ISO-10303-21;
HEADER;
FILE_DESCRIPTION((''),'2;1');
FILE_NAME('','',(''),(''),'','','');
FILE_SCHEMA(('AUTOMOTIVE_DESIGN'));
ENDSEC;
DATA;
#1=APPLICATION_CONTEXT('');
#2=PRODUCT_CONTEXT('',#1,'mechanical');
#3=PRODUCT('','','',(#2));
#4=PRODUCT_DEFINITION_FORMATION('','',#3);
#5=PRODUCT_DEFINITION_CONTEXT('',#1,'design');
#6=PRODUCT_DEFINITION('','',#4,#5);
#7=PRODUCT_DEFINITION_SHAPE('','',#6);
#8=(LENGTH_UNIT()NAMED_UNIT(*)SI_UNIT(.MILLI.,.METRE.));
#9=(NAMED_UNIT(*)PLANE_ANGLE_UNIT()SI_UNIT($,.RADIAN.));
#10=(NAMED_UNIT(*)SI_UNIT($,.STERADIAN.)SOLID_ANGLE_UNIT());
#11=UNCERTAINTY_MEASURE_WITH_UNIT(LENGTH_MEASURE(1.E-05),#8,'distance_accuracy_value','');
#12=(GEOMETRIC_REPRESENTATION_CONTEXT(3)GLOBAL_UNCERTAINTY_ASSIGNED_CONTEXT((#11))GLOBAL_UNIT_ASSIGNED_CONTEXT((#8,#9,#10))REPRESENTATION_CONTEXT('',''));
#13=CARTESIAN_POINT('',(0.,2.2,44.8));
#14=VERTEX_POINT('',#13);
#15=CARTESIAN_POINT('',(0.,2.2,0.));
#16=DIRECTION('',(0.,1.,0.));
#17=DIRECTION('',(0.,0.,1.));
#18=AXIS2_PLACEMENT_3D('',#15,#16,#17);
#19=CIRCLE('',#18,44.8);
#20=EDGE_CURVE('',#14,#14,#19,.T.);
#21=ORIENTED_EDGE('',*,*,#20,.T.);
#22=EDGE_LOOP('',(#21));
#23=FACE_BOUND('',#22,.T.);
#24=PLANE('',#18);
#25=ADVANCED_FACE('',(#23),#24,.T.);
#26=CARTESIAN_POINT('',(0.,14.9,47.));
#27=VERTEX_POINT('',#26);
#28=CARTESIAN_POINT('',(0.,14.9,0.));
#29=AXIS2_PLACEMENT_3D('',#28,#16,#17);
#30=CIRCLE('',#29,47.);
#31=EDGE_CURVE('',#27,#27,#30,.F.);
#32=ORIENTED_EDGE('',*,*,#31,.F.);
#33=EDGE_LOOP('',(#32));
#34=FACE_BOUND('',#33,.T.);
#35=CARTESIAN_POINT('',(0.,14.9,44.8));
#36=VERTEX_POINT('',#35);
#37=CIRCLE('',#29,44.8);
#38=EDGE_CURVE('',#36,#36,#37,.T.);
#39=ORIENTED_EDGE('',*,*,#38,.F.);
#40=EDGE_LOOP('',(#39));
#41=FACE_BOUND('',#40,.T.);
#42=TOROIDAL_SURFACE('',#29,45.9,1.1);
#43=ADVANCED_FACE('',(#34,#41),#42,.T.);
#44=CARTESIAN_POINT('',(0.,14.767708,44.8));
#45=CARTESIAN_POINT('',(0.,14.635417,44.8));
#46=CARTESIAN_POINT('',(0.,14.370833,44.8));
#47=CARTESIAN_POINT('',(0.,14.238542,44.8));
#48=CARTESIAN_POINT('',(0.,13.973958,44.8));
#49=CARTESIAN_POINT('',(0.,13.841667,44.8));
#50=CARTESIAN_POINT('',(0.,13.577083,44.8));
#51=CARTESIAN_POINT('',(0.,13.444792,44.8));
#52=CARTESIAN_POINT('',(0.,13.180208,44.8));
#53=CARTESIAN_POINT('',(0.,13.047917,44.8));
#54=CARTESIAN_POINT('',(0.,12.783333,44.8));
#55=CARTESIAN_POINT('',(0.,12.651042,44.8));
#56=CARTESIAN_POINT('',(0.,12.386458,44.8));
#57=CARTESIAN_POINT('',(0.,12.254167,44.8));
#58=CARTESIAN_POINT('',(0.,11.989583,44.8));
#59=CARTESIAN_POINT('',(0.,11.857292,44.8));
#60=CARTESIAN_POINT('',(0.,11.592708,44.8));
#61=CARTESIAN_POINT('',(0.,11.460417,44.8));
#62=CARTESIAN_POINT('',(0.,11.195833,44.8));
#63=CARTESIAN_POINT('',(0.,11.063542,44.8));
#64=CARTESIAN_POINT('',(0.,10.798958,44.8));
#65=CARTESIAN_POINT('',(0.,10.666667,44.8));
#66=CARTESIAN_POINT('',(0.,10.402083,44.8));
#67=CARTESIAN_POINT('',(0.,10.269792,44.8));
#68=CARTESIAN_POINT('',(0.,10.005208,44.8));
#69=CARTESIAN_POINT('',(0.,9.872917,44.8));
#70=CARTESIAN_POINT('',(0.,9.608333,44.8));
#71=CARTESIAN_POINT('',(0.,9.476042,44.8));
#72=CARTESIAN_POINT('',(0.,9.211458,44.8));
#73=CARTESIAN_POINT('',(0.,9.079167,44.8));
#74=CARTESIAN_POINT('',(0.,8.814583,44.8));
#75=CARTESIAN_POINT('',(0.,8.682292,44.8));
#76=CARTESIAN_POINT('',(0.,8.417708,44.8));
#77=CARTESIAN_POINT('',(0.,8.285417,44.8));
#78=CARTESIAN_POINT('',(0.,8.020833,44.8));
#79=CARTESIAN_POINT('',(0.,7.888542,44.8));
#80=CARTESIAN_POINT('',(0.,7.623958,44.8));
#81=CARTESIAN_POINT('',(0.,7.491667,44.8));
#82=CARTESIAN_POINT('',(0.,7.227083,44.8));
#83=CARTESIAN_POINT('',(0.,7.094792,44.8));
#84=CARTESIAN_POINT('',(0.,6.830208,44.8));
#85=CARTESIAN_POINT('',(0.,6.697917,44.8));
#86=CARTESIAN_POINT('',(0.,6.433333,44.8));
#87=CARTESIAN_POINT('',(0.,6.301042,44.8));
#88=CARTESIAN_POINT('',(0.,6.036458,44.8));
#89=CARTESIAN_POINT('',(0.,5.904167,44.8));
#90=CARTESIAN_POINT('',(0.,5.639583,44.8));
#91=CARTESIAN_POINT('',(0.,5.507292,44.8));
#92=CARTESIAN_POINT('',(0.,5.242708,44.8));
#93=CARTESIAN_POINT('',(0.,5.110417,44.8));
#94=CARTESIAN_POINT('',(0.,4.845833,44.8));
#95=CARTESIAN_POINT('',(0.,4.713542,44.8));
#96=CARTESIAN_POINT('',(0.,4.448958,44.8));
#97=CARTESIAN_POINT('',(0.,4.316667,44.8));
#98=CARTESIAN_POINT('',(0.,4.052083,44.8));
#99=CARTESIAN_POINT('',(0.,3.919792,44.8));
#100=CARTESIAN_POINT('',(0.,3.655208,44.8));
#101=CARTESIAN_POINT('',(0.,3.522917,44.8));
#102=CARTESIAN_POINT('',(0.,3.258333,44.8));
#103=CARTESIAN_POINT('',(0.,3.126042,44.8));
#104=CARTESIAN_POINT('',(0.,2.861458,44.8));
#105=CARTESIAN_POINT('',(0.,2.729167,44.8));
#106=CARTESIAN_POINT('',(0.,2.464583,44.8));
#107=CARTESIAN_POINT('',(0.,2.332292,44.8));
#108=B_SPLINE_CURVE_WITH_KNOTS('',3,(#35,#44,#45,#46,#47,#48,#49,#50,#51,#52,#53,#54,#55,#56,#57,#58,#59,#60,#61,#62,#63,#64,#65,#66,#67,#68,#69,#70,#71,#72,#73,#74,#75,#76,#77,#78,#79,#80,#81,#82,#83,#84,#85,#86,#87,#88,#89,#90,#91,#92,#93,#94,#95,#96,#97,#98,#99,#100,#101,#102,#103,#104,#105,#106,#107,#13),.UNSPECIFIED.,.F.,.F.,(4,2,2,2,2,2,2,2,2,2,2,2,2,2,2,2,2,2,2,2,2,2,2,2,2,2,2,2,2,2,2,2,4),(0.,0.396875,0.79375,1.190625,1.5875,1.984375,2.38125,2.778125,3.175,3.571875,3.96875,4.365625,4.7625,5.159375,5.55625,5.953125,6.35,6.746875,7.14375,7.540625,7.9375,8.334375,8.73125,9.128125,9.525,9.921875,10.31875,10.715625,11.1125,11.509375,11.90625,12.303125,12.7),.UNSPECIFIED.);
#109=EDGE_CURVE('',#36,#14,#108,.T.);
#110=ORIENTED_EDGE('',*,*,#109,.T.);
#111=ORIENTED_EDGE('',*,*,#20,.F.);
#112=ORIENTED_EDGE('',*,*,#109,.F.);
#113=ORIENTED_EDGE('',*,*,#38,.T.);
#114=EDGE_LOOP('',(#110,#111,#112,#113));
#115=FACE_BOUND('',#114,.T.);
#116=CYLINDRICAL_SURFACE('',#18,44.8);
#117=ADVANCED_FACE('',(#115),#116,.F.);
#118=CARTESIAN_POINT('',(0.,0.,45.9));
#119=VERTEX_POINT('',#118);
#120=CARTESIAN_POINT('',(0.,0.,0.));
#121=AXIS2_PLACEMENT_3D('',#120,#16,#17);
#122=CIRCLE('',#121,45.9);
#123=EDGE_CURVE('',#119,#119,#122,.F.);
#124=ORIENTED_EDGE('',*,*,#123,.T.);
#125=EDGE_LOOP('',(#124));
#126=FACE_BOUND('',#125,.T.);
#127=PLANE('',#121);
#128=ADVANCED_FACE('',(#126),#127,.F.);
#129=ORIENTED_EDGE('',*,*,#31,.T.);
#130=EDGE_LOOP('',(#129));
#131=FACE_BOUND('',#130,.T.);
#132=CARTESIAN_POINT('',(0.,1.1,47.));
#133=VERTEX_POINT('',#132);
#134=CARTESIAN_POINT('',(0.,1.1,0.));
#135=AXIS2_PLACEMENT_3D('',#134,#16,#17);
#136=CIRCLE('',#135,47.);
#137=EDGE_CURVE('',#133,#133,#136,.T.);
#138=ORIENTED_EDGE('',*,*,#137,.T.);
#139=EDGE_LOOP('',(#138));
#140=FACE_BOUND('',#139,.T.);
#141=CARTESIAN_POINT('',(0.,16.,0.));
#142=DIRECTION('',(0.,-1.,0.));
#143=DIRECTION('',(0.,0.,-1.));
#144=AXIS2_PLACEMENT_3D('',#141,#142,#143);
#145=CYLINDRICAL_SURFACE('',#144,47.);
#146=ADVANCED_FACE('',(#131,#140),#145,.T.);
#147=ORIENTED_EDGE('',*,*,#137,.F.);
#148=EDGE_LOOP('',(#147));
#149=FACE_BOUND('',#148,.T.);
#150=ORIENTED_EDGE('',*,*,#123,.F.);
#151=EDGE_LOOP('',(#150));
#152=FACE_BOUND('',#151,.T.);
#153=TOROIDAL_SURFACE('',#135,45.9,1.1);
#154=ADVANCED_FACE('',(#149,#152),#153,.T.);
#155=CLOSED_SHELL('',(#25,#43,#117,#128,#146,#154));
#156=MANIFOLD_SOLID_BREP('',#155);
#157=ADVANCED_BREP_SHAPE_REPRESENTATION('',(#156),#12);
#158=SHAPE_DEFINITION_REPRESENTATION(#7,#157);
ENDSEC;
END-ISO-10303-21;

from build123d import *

# Parameters (mm, degrees)
SKETCH1_R           = 47
BOSS_EXTRUDE1_DEPTH = 16
SKETCH2_R           = 44.8
CUT_EXTRUDE1_DEPTH  = 13.8
FILLET1_R           = 1.1
FILLET2_R           = 1.1


with BuildPart() as part:
    # Sketch1 → Boss-Extrude1 (new body)
    with BuildSketch(Plane(origin=(0, 0, 0), x_dir=(1, 0, 0), z_dir=(0, 1, 0))):
        with Locations(Location((0, 0, 0), (0, 0, 270))):
            Circle(SKETCH1_R)
    extrude(amount=BOSS_EXTRUDE1_DEPTH)

    # Sketch2 → Cut-Extrude1 (cut)
    with BuildSketch(Plane(origin=(0, 16, 0), x_dir=(1, 0, 0), z_dir=(0, 1, 0))):
        with Locations(Location((0, 0, 0), (0, 0, 270))):
            Circle(SKETCH2_R)
    extrude(amount=-CUT_EXTRUDE1_DEPTH, mode=Mode.SUBTRACT)

    # Fillet1
    fillet1_edges = [part.edges().sort_by_distance(p)[0] for p in [
        (0, 16, -47),
        (0, 16, -44.8),
    ]]
    fillet(fillet1_edges, radius=FILLET1_R - 0.0001)  # a hair under: the kernel refuses the full size

    # Fillet2
    fillet2_edges = [part.edges().sort_by_distance(p)[0] for p in [
        (0, 0, -47),
    ]]
    fillet(fillet2_edges, radius=FILLET2_R)


solid = part.part
